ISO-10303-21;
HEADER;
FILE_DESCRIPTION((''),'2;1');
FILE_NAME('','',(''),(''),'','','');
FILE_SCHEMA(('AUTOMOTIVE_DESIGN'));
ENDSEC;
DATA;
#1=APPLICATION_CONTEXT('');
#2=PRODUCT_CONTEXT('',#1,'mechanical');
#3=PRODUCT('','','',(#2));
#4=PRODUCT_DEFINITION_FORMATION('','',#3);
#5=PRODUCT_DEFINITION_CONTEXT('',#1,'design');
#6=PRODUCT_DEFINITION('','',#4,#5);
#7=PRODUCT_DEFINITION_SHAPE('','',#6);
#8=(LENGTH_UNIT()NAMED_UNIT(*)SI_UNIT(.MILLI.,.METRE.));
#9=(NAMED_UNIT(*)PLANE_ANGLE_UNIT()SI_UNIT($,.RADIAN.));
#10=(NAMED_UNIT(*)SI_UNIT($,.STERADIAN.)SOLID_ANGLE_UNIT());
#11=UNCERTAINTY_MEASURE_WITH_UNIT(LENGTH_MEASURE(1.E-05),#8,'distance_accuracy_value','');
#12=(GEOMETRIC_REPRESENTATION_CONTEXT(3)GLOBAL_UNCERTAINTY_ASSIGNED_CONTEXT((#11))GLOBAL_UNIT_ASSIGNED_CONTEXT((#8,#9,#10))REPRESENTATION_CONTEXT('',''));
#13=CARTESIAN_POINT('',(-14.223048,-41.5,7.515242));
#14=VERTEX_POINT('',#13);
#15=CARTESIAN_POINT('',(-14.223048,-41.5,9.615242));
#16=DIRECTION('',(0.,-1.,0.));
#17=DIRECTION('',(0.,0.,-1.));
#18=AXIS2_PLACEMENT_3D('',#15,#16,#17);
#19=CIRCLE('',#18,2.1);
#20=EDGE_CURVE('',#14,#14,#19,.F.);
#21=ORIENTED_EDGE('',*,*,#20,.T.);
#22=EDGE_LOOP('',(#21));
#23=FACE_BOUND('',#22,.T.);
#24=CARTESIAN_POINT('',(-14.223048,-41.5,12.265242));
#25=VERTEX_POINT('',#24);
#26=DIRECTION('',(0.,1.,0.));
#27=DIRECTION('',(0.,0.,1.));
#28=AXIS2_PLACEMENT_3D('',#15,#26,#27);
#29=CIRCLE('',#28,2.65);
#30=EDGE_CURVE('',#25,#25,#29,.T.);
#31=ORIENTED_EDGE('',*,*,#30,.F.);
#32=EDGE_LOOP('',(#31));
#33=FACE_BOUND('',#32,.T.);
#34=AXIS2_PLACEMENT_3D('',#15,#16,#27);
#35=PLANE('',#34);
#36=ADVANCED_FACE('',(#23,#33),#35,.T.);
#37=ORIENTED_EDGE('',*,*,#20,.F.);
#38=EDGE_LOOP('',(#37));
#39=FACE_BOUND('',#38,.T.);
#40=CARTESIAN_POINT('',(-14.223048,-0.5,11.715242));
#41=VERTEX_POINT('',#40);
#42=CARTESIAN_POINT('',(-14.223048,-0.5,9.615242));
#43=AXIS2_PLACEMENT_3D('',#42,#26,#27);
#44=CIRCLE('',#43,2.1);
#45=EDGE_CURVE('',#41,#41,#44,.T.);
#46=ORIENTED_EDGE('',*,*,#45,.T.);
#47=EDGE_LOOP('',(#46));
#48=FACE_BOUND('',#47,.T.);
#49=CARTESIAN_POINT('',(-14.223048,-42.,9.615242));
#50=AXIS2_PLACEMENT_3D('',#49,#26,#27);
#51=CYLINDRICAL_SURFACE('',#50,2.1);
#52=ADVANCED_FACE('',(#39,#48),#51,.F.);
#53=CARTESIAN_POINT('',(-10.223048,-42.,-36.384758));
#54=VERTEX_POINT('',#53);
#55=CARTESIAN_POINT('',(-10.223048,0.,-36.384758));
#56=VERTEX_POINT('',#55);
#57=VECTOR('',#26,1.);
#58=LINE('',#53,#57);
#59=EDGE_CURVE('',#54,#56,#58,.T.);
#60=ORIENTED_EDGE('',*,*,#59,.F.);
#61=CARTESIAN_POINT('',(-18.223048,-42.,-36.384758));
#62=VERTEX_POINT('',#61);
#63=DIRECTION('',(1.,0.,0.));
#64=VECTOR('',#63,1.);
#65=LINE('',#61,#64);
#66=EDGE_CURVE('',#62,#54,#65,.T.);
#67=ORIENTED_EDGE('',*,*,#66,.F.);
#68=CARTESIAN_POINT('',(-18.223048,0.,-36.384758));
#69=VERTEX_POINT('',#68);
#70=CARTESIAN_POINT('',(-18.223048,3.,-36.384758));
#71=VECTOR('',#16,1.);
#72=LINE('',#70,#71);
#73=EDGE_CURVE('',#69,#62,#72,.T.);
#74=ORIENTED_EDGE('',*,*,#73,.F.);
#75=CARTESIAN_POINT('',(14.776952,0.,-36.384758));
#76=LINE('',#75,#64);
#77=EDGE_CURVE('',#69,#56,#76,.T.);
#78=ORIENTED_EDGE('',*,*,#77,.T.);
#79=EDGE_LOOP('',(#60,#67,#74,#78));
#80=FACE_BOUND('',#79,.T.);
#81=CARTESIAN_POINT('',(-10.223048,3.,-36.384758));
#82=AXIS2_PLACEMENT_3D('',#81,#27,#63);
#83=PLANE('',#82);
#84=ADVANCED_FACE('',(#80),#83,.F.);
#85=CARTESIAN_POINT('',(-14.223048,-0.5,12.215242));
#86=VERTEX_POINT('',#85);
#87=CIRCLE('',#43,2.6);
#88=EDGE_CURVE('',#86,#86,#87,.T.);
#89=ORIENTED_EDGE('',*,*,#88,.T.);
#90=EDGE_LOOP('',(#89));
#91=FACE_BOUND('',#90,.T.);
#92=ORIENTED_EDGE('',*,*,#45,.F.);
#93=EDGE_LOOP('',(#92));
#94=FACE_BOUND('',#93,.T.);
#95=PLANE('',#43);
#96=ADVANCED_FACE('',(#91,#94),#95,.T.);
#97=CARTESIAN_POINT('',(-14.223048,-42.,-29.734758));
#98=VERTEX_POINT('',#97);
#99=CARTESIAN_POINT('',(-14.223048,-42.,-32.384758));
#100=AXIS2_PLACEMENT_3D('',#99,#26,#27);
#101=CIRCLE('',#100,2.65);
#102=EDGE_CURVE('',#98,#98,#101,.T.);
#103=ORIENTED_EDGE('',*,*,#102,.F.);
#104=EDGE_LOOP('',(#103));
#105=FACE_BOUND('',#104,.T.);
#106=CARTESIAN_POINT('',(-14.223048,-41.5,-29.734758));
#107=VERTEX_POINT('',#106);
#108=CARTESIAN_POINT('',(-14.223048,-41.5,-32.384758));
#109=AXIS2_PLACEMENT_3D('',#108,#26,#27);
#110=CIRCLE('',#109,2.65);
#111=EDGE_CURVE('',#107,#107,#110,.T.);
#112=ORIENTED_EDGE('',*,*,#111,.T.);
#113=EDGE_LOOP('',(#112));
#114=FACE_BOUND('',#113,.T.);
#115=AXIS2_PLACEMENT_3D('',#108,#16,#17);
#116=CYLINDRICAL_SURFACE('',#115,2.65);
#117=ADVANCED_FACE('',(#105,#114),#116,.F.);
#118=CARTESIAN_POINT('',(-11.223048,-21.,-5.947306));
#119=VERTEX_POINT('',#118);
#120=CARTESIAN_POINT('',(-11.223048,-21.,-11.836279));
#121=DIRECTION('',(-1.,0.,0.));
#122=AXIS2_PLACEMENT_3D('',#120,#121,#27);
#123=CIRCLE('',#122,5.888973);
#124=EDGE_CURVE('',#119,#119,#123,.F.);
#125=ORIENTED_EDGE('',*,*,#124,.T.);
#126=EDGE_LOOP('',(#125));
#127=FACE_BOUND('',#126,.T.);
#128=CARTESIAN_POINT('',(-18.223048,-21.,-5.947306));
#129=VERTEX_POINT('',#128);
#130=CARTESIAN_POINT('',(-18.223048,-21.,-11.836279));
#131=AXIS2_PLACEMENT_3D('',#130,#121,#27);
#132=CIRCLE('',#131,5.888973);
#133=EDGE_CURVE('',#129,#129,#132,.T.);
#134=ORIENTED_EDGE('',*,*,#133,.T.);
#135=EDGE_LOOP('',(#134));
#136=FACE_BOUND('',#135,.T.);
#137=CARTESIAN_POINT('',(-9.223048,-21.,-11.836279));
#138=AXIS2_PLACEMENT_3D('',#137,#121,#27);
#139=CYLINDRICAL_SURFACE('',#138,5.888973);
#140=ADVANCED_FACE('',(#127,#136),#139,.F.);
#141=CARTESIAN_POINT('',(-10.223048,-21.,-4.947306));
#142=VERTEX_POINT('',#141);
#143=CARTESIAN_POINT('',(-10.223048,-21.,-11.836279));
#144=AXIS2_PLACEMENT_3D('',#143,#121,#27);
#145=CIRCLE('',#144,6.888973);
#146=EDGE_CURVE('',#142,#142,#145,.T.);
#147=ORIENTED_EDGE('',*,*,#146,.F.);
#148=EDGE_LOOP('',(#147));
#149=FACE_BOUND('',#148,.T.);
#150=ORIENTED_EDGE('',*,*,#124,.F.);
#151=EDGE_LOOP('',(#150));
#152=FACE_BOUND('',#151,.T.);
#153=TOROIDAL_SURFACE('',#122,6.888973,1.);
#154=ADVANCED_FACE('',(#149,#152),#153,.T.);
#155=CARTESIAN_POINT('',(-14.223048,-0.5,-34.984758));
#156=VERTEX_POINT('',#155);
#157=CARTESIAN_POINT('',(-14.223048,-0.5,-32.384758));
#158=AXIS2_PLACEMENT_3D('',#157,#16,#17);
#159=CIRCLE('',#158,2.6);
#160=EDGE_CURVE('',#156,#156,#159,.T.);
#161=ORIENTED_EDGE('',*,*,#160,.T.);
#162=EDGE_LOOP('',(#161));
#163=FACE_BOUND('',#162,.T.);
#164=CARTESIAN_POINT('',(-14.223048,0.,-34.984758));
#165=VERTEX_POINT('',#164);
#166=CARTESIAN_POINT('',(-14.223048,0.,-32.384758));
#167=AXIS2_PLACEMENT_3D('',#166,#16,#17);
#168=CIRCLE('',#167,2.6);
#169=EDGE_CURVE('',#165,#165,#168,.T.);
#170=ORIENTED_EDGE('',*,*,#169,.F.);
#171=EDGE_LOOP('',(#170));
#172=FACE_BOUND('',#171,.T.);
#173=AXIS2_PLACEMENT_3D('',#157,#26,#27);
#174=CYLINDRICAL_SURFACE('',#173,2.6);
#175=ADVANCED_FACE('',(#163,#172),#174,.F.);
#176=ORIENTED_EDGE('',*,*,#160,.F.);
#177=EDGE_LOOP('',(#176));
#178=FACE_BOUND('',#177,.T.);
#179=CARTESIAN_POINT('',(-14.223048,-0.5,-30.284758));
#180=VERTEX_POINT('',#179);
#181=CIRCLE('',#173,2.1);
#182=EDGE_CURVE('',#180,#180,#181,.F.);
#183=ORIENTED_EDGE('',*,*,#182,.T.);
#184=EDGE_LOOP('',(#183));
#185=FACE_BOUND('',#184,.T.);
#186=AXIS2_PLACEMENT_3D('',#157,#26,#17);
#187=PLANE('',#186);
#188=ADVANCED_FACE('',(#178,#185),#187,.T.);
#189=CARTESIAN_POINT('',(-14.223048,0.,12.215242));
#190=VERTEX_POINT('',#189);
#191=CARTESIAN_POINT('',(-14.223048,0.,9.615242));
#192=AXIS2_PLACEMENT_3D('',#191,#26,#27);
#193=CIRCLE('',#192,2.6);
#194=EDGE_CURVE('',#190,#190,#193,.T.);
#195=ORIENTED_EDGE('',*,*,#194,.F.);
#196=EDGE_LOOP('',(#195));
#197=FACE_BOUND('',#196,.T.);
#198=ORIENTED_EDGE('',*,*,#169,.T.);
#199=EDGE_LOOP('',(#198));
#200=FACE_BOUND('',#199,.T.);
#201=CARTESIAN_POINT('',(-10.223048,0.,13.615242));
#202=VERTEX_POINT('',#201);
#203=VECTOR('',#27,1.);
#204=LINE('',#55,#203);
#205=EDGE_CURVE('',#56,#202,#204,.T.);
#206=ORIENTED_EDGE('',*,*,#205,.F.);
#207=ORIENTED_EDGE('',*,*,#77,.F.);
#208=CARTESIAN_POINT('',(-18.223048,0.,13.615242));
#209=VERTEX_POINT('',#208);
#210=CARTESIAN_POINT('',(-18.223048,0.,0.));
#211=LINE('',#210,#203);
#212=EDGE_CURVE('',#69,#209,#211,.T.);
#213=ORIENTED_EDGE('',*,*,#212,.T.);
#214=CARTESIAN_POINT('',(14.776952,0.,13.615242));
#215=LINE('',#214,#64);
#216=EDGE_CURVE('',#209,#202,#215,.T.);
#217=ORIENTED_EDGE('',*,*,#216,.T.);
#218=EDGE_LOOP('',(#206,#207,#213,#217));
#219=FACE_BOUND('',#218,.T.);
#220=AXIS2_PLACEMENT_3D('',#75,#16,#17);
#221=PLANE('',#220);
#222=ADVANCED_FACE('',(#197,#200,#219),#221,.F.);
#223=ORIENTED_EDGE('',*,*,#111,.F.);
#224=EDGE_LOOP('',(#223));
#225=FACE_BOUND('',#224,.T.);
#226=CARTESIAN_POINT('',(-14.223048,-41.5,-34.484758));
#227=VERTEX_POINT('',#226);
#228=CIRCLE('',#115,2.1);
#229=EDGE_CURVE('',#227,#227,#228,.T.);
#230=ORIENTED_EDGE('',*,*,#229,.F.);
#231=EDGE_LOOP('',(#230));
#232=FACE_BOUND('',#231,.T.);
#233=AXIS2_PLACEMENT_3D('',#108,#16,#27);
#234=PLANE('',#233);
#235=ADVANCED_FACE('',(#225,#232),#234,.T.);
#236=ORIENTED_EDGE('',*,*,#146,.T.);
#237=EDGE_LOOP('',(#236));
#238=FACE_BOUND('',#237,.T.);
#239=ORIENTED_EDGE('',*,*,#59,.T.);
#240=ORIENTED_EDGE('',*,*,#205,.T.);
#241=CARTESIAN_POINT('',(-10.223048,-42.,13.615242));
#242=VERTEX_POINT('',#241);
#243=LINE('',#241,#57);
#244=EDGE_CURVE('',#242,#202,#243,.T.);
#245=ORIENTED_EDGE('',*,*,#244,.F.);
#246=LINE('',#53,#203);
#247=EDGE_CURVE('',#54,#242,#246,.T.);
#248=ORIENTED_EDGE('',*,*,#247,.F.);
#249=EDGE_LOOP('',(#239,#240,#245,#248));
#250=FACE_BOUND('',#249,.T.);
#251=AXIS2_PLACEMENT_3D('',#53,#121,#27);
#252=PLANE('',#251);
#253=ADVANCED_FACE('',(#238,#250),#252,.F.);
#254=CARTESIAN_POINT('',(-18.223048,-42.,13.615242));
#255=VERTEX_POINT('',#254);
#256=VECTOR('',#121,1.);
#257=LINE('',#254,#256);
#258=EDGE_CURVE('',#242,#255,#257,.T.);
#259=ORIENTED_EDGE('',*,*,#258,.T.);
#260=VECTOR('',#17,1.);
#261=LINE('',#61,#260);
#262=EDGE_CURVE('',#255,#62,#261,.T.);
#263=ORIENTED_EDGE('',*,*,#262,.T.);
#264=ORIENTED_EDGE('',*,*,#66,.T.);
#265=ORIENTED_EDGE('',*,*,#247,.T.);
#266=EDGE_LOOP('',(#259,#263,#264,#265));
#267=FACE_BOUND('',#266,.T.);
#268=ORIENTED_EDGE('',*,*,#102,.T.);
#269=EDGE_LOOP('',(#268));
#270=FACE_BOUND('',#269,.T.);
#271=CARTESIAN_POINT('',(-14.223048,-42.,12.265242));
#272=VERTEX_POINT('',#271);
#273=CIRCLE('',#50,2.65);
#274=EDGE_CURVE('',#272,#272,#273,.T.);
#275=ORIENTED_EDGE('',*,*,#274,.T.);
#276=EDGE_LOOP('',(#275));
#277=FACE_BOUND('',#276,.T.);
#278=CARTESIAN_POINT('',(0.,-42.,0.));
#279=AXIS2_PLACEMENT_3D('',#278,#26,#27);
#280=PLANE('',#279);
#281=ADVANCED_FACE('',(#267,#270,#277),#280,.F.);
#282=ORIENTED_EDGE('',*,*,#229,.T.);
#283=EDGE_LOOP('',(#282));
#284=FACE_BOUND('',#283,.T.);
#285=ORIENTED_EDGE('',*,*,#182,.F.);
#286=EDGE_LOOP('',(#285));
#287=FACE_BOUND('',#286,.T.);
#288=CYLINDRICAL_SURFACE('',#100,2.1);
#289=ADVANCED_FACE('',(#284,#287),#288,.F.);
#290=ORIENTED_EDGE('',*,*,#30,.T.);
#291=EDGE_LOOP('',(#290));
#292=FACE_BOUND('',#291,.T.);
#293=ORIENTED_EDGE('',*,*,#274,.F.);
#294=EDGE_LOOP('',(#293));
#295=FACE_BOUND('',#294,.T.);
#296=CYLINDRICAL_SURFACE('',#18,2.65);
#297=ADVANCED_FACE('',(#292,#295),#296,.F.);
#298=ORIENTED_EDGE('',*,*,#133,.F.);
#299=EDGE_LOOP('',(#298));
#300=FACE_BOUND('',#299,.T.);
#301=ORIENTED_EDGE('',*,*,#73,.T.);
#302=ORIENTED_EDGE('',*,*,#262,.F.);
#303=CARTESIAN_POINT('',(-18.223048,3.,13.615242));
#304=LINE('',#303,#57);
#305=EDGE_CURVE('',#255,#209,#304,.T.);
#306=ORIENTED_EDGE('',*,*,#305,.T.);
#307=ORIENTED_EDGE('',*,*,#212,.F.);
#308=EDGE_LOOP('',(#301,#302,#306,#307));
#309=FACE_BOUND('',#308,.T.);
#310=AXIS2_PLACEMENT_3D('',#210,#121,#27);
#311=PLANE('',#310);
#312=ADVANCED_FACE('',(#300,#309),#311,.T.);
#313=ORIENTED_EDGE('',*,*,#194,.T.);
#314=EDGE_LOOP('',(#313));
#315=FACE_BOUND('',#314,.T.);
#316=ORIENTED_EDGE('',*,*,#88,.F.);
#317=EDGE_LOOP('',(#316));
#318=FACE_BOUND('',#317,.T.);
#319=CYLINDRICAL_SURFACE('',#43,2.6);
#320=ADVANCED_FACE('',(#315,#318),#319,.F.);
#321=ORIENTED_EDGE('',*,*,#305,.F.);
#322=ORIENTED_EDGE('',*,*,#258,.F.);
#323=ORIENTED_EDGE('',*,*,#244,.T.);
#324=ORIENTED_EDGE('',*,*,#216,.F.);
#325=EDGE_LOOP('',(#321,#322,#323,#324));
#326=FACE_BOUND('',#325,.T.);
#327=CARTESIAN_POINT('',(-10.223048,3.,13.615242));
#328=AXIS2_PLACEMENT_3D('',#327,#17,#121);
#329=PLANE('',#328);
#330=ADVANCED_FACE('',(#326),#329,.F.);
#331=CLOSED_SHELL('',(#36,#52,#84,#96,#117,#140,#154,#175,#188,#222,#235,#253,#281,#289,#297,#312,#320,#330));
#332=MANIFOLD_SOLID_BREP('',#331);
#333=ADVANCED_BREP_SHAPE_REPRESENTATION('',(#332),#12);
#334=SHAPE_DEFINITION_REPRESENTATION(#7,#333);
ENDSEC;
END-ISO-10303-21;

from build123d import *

# Parameters (mm, degrees)
SKETCH1_W           = 25
SKETCH1_H           = 50
SKETCH1_R           = 3.4
BOSS_EXTRUDE1_DEPTH = 3
SKETCH2_W           = 50
SKETCH2_H           = 3
BOSS_EXTRUDE2_DEPTH = 8
SKETCH3_W           = 8
SKETCH3_H           = 50
BOSS_EXTRUDE3_DEPTH = 42
SKETCH4_R           = 2.65
CUT_EXTRUDE1_DEPTH  = 0.5
SKETCH5_R           = 5.888972746
CUT_EXTRUDE2_DEPTH  = 9
FILLET2_R           = 1
SKETCH6_R           = 12.6
BOSS_EXTRUDE4_DEPTH = 2
FILLET4_R           = 1
SKETCH8_R           = 1.589780168
SKETCH8_R_2         = 1.777428262
CUT_EXTRUDE3_DEPTH  = 10
SKETCH9_W           = 49.021678163
SKETCH9_H           = 20.976854622
CUT_EXTRUDE4_DEPTH  = 68.79439129
SKETCH11_R          = 2.1
CUT_EXTRUDE5_DEPTH  = 59.480168703
SKETCH14_R          = 2.6
CUT_EXTRUDE6_DEPTH  = 0.5


with BuildPart() as part:
    # Sketch1 → Boss-Extrude1 (new body)
    with BuildSketch(Plane(origin=(0, 0, 0), x_dir=(1, 0, 0), z_dir=(0, 1, 0))):
        with Locations((2.276951673, 11.384758364)):
            Rectangle(SKETCH1_W, SKETCH1_H)
        with Locations(Location((1.276951673, 11.384758364, 0), (0, 0, 270))):
            Circle(SKETCH1_R, mode=Mode.SUBTRACT)
    extrude(amount=BOSS_EXTRUDE1_DEPTH)

    # Sketch2 → Boss-Extrude2 (add)
    with BuildSketch(Plane.ZY.offset(10.223048327)):
        with Locations((-11.384758364, 1.5)):
            Rectangle(SKETCH2_W, SKETCH2_H)
    extrude(amount=BOSS_EXTRUDE2_DEPTH)

    # Sketch3 → Boss-Extrude3 (add)
    with BuildSketch(Plane.XZ):
        with Locations((-14.223048327, -11.384758364)):
            Rectangle(SKETCH3_W, SKETCH3_H)
    extrude(amount=BOSS_EXTRUDE3_DEPTH)

    # Sketch4 → Cut-Extrude1 (cut)
    with BuildSketch(Plane(origin=(0, 3, 0), x_dir=(1, 0, 0), z_dir=(0, 1, 0))):
        with Locations(Location((-14.223048327, 32.384758364, 0), (0, 0, 270))):
            Circle(SKETCH4_R)
        with Locations(Location((-14.223048327, -9.615241636, 0), (0, 0, 270))):
            Circle(SKETCH4_R)
    cut_extrude1 = extrude(amount=-CUT_EXTRUDE1_DEPTH, mode=Mode.SUBTRACT)

    # Mirror1: Cut-Extrude1 across plane
    add(cut_extrude1.mirror(Plane.ZX.offset(-19.5)), mode=Mode.SUBTRACT)

    # Sketch5 → Cut-Extrude2 (cut)
    with BuildSketch(Plane.ZY.offset(18.223048327)):
        with Locations((-11.836279124, -21)):
            Circle(SKETCH5_R)
    extrude(amount=-CUT_EXTRUDE2_DEPTH, mode=Mode.SUBTRACT)

    # Fillet2
    fillet2_edges = [part.edges().sort_by_distance(p)[0] for p in [
        (-10.223048327, -21, -17.72525187),
    ]]
    fillet(fillet2_edges, radius=FILLET2_R)

    # Mirror2: Cut-Extrude1 across plane
    add(cut_extrude1.mirror(Plane.ZY.offset(1.723048327)), mode=Mode.SUBTRACT)

    # Sketch6 → Boss-Extrude4 (add)
    with BuildSketch(Plane(origin=(0, 3, 0), x_dir=(1, 0, 0), z_dir=(0, 1, 0))):
        with BuildLine():
            Line((14.776951673, 5.825082115), (14.776951673, 16.944434614))
            ThreePointArc((14.776951673, 16.944434614), (-13.323048327, 11.384758364), (14.776951673, 5.825082115))
        make_face()
        with Locations(Location((1.276951673, 11.384758364, 0), (0, 0, 270))):
            Circle(SKETCH6_R, mode=Mode.SUBTRACT)
    extrude(amount=BOSS_EXTRUDE4_DEPTH)

    # Fillet4
    # the kernel refuses this fillet: 1 mm, written as the material it takes off along each edge
    with BuildSketch(Plane(origin=(14.776951673, 5, -3.325082115), x_dir=(0, -1, 0), z_dir=(0, 0, -1))) as fillet4_piece_1:
        with BuildLine():
            CenterArc((FILLET4_R, FILLET4_R), FILLET4_R, 180, 90)
            Line((0, FILLET4_R), (0, 0))
            Line((0, 0), (FILLET4_R, 0))
        make_face()
    extrude(amount=16.119352499, mode=Mode.SUBTRACT)

    # Sketch8 → Cut-Extrude3 (cut)
    with BuildSketch(Plane(origin=(0, 3, 0), x_dir=(1, 0, 0), z_dir=(0, 1, 0))):
        with Locations(Location((1.276951673, 19.884758364, 0), (0, 0, 270))):
            Circle(SKETCH8_R)
        with Locations(Location((1.276951673, 2.884758364, 0), (0, 0, 270))):
            Circle(SKETCH8_R_2)
    extrude(amount=-CUT_EXTRUDE3_DEPTH, mode=Mode.SUBTRACT)

    # Sketch9 → Cut-Extrude4 (cut, through all)
    with BuildSketch(Plane.XY.offset(13.615241636)):
        with Locations((-9.733887409, 10.488427311)):
            Rectangle(SKETCH9_W, SKETCH9_H)
    extrude(amount=-CUT_EXTRUDE4_DEPTH, mode=Mode.SUBTRACT)

    # Sketch11 → Cut-Extrude5 (cut, through all)
    with BuildSketch(Plane(origin=(0, 0, 0), x_dir=(1, 0, 0), z_dir=(0, 1, 0))):
        with Locations(Location((-14.223048327, 32.384758364, 0), (0, 0, 270))):
            Circle(SKETCH11_R)
    cut_extrude5 = extrude(amount=-CUT_EXTRUDE5_DEPTH, mode=Mode.SUBTRACT)

    # Mirror3: Cut-Extrude5 across plane
    add(cut_extrude5.mirror(Plane.XY.offset(-11.384758364)), mode=Mode.SUBTRACT)

    # Sketch14 → Cut-Extrude6 (cut)
    with BuildSketch(Plane(origin=(0, 0, 0), x_dir=(1, 0, 0), z_dir=(0, 1, 0))):
        with Locations(Location((-14.223048327, -9.615241636, 0), (0, 0, 270))):
            Circle(SKETCH14_R)
    cut_extrude6 = extrude(amount=-CUT_EXTRUDE6_DEPTH, mode=Mode.SUBTRACT)

    # Mirror4: Cut-Extrude6 across plane
    add(cut_extrude6.mirror(Plane.XY.offset(-11.384758364)), mode=Mode.SUBTRACT)


solid = part.part
